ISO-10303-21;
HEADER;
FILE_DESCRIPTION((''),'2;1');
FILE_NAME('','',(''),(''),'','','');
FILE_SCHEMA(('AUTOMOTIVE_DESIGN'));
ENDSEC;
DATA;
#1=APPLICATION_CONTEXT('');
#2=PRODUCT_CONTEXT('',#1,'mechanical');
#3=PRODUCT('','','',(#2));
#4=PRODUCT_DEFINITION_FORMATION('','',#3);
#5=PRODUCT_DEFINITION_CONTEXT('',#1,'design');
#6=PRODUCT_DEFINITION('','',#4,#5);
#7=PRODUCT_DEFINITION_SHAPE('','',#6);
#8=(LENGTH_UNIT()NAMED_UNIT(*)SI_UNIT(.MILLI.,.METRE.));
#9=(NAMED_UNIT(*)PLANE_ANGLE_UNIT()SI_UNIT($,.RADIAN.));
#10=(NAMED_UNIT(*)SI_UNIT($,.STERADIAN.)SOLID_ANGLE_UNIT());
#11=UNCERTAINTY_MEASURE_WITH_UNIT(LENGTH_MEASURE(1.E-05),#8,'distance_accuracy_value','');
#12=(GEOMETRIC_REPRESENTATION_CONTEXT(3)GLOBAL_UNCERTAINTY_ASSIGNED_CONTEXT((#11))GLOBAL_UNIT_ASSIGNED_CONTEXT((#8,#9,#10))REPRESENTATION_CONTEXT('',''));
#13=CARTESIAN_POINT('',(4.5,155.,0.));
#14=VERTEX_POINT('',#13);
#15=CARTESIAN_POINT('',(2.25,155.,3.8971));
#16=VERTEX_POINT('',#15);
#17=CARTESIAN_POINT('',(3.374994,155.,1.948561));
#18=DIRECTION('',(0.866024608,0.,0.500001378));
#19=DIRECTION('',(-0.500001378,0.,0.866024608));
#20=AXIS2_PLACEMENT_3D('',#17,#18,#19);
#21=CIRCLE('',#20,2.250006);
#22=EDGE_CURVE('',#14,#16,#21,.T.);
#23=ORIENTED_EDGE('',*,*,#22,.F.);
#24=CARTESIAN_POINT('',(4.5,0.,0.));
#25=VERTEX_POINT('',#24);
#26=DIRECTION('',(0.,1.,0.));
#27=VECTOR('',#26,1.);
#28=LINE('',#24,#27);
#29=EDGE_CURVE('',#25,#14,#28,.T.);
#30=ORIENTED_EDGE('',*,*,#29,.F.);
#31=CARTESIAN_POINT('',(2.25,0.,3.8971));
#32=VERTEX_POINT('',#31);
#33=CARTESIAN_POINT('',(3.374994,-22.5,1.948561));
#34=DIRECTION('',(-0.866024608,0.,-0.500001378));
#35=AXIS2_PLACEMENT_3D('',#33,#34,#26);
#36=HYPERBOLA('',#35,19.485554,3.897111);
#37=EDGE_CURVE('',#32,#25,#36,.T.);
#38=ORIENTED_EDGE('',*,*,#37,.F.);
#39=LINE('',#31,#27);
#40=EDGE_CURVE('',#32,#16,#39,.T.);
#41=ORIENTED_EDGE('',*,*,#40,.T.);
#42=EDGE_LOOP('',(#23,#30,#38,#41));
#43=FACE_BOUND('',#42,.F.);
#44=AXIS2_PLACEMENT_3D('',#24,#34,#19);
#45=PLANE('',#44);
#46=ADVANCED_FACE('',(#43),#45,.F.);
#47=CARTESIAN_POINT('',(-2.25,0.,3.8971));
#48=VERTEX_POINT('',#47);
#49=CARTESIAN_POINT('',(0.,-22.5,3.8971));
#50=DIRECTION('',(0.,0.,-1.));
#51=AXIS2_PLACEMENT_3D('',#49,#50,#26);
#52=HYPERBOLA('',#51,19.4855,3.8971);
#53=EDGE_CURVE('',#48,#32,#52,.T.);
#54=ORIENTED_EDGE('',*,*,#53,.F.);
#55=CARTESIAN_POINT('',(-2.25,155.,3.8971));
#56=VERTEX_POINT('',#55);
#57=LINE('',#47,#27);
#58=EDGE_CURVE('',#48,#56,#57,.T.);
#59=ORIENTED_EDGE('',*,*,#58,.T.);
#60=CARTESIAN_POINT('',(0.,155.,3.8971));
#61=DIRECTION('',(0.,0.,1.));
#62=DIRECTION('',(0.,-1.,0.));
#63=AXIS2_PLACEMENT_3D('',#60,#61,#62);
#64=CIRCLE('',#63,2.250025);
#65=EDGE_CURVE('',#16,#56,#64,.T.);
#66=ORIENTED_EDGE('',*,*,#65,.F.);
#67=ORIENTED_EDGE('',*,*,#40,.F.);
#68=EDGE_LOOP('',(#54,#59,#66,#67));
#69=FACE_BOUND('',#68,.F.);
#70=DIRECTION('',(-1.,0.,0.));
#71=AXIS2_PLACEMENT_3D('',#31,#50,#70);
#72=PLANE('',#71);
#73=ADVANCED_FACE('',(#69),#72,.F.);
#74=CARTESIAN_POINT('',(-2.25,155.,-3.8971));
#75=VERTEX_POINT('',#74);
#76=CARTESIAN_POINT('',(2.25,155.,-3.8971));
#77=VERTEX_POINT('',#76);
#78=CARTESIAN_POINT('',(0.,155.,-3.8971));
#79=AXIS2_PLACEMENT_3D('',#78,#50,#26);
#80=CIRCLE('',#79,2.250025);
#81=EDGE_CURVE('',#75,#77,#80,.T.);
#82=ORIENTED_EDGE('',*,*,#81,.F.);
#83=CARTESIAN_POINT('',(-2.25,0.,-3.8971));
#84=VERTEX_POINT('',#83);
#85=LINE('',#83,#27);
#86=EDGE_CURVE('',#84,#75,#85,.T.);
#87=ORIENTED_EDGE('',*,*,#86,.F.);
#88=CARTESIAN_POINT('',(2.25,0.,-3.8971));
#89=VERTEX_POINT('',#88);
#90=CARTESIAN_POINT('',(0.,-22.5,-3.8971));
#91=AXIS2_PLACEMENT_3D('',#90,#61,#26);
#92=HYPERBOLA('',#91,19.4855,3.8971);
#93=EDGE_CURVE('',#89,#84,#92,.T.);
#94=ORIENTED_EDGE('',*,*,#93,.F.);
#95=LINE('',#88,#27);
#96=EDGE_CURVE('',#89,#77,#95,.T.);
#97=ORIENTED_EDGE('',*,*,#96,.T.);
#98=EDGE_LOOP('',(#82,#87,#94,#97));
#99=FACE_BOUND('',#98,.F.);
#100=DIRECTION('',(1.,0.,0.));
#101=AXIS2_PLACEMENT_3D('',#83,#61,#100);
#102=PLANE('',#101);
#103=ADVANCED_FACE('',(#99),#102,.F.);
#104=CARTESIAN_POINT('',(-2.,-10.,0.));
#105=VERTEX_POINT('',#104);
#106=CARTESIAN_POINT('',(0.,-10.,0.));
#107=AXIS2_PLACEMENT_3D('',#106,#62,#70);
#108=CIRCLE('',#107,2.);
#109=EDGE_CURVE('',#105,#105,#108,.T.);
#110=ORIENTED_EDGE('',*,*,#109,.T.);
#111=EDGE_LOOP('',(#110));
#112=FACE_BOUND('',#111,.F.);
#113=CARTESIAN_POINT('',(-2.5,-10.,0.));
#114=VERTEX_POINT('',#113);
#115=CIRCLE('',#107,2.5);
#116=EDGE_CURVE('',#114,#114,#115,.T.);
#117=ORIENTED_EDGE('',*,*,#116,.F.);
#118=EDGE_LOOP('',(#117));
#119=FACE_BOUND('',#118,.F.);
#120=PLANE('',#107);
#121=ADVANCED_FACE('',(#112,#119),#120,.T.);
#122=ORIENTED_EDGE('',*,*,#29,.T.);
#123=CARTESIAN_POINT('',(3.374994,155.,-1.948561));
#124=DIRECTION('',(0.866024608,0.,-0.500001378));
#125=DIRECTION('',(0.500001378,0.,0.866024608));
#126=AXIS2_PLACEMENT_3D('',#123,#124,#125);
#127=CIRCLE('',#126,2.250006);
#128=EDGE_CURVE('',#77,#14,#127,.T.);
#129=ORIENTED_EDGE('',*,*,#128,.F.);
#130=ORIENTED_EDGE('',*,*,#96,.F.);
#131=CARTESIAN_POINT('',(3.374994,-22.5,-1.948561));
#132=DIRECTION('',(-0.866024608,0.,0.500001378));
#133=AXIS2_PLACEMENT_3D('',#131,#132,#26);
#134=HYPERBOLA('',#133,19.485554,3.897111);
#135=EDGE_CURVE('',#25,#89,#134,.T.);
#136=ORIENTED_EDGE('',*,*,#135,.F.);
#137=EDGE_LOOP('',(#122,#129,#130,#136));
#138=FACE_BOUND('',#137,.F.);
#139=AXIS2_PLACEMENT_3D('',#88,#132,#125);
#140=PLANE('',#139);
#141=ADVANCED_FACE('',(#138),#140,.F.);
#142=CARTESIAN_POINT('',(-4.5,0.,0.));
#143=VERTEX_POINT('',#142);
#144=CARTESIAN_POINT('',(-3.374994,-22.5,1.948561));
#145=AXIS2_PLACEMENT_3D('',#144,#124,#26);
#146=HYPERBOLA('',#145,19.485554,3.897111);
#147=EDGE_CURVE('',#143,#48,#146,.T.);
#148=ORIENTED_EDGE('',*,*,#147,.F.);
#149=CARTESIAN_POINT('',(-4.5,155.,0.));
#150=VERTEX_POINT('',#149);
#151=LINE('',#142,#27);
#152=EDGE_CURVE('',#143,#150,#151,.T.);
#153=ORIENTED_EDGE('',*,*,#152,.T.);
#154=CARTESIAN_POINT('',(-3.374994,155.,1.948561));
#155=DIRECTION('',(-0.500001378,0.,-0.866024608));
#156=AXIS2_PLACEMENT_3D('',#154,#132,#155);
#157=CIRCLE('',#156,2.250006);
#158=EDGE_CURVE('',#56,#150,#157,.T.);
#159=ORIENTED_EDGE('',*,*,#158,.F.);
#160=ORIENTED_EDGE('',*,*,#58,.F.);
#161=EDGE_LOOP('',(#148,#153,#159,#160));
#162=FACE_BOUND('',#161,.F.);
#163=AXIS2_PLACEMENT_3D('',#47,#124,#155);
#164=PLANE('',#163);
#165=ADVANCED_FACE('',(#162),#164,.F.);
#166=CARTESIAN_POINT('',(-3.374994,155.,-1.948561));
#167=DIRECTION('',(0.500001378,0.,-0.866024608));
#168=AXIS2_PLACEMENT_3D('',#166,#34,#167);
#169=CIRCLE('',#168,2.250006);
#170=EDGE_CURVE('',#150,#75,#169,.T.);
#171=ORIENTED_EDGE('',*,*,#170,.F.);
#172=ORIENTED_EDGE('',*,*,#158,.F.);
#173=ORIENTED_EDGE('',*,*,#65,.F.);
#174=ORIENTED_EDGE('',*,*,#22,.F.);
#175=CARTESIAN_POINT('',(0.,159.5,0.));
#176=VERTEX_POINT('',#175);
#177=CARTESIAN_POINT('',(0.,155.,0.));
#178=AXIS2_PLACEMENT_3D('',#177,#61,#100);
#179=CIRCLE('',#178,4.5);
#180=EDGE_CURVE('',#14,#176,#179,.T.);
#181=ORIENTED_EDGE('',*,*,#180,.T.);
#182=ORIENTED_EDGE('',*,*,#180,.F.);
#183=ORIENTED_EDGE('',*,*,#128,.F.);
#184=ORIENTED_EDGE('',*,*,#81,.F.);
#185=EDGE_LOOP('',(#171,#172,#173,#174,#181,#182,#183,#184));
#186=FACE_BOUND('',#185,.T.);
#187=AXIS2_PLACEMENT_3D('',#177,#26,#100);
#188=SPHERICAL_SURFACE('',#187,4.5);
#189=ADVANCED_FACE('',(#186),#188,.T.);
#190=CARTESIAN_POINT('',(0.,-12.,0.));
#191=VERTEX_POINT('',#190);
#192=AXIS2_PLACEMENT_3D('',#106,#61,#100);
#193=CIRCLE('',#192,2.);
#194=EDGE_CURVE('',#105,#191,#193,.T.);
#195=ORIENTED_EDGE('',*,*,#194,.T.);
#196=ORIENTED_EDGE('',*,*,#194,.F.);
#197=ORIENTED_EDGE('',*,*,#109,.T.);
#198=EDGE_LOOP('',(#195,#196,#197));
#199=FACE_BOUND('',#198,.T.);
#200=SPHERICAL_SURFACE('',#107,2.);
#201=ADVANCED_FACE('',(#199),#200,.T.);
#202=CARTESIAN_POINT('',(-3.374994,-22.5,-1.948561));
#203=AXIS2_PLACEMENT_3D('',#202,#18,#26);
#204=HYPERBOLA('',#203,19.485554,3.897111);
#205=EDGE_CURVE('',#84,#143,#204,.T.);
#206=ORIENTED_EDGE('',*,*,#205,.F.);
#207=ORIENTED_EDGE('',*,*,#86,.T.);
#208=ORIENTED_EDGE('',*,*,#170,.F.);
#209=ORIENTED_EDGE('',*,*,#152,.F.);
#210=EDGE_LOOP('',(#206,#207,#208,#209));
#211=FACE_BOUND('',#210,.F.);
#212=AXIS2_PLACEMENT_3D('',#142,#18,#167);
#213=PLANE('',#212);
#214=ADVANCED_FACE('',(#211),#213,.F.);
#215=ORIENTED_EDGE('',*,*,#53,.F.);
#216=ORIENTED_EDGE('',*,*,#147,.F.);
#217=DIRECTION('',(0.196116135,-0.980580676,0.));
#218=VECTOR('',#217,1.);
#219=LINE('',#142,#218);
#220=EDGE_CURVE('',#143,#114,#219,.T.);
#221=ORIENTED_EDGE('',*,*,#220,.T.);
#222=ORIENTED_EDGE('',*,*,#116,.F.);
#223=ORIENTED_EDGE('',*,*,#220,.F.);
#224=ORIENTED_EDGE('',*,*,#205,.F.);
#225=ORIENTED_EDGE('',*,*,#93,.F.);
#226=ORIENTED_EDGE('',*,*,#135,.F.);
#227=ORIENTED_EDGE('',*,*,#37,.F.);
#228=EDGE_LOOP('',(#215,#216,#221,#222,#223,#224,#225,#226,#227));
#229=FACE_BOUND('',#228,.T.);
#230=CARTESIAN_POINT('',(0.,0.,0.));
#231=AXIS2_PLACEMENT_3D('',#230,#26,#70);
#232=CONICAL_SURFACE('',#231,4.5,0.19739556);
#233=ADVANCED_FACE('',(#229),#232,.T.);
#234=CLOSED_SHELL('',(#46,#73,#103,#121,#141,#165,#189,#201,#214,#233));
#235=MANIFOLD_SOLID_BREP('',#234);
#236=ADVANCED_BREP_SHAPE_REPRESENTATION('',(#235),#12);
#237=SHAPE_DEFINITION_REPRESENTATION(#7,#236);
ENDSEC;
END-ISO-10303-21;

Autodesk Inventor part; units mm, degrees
ref_plane "YZ Plane" through (0, 0, 0) normal (1, 0, 0) x (0, 1, 0)
ref_plane "XZ Plane" through (0, 0, 0) normal (0, 1, 0) x (-1, 0, 0)
ref_plane "XY Plane" through (0, 0, 0) normal (0, 0, 1) x (1, 0, 0)
sketch "Sketch1" plane through (0, 0, 0) normal (0, 1, 0) x (-1, 0, 0)
  line L0 (-4.5, 0) -> (-2.25, 3.8971)
  line L1 (-2.25, 3.8971) -> (2.25, 3.8971)
  line L2 (2.25, 3.8971) -> (4.5, 0)
  line L3 (4.5, 0) -> (2.25, -3.8971)
  line L4 (2.25, -3.8971) -> (-2.25, -3.8971)
  line L5 (-2.25, -3.8971) -> (-4.5, 0)
  point P0 (0, 0)
  point P1 (0, 0)
  dimension "d1" = 9
extrude "Extrusion1" add sketch "Sketch1" along normal blind 155
sketch "Sketch2" plane through (0, 0, 0) normal (0, 0, 1) x (1, 0, 0)
  line L0 (2.25, 155) -> (-2.25, 155) projected
  line L1 (2.25, 155) -> (4.5, 155) projected
  arc A0 (4.5, 155) -> (0, 159.5) centre (0, 155) ccw
  line L2 (0, 155) -> (0, 159.5)
  line L3 (0, 155) -> (4.5, 155)
  point P0 (0, 0)
revolve "Revolution1" add sketch "Sketch2" angle 360 about axis through (0, 155, 0) along (0, 1, 0)
sketch "Sketch3" plane through (0, 0, 0) normal (0, -1, 0) x (1, 0, 0)
  line L0 (2.25, -3.8971) -> (-2.25, -3.8971) projected
  arc A0 (-4.5, 0) -> (-2.25, -3.8971) centre (0, 0) ccw projected
  line L1 (2.25, -3.8971) -> (-2.25, -3.8971)
  line L2 (-2.25, -3.8971) -> (-4.5, 0) projected
  line L3 (-2.25, -3.8971) -> (-4.5, 0)
  arc A1 (-2.25, 3.8971) -> (-4.5, 0) centre (0, 0) ccw projected
  line L4 (-4.5, 0) -> (-2.25, 3.8971)
  arc A2 (2.25, 3.8971) -> (-2.25, 3.8971) centre (0, 0) ccw projected
  line L5 (-2.25, 3.8971) -> (2.25, 3.8971)
  line L6 (2.25, 3.8971) -> (4.5, 0)
  line L7 (4.5, 0) -> (2.25, -3.8971)
  point P0 (0, 0)
extrude "Extrusion2" cut sketch "Sketch3" along normal mid plane 400 contours L0 L2 L4 L5 L6 L7 keep common part
sketch "Sketch4" plane through (0, 0, 0) normal (0, 0, 1) x (1, 0, 0)
  line L0 (-4.5, 0) -> (-4.5, 155) projected
  line L1 (0, 0) -> (-4.5, 0)
  line L2 (0, 0) -> (0, -10)
  line L3 (0, -10) -> (-2.5, -10)
  line L4 (-4.5, 0) -> (-2.5, -10)
  point P0 (-4.5, 100)
  dimension "d7" = 10
  dimension "d9" = 2.5
revolve "Revolution2" add sketch "Sketch4" angle 360 about axis through (0, 0, 0) along (0, -1, 0)
thicken "Thicken1" operation cut thickness 5 both sides no extend neighbours no toward (0, -1, 0) faces at (-0.4635, 0, 4.0247)
thicken "Thicken2" operation cut thickness 5 both sides no extend neighbours no toward (0, -1, 0) faces at (-3.2537, 0, 2.4138)
thicken "Thicken3" operation cut thickness 5 both sides no extend neighbours no toward (0, -1, 0) faces at (-3.7172, 0, -1.6109)
thicken "Thicken4" operation cut thickness 5 both sides no extend neighbours no toward (0, -1, 0) faces at (3.4635, 0, 2.1807)
thicken "Thicken5" operation cut thickness 5 both sides no extend neighbours no toward (0, -1, 0) faces at (3.7172, 0, -1.6109)
thicken "Thicken6" operation cut thickness 5 both sides no extend neighbours no toward (0, -1, 0) faces at (0.1568, 0, -4.0899)
sketch "Sketch5" plane through (0, 0, 0) normal (0, 0, 1) x (1, 0, 0)
  line L0 (-2.5, -10) -> (2.5, -10) projected
  arc A0 (2, -10) -> (0, -12) centre (0, -10) ccw
  line L1 (0, -10) -> (0, -12)
  line L2 (2.5, -10) -> (2, -10)
  line L3 (-2, -10) -> (-2.5, -10)
  line L4 (0, -10) -> (-2, -10)
  point P0 (0, 0)
  point P1 (-2, -10)
  dimension "d23" = 4
revolve "Revolution3" add sketch "Sketch5" angle 360 about axis through (0, -10, 0) along (0, -1, 0) contours L0 L1 A0
properties part number "stylus_pen" material "Acetal Resin, White"
